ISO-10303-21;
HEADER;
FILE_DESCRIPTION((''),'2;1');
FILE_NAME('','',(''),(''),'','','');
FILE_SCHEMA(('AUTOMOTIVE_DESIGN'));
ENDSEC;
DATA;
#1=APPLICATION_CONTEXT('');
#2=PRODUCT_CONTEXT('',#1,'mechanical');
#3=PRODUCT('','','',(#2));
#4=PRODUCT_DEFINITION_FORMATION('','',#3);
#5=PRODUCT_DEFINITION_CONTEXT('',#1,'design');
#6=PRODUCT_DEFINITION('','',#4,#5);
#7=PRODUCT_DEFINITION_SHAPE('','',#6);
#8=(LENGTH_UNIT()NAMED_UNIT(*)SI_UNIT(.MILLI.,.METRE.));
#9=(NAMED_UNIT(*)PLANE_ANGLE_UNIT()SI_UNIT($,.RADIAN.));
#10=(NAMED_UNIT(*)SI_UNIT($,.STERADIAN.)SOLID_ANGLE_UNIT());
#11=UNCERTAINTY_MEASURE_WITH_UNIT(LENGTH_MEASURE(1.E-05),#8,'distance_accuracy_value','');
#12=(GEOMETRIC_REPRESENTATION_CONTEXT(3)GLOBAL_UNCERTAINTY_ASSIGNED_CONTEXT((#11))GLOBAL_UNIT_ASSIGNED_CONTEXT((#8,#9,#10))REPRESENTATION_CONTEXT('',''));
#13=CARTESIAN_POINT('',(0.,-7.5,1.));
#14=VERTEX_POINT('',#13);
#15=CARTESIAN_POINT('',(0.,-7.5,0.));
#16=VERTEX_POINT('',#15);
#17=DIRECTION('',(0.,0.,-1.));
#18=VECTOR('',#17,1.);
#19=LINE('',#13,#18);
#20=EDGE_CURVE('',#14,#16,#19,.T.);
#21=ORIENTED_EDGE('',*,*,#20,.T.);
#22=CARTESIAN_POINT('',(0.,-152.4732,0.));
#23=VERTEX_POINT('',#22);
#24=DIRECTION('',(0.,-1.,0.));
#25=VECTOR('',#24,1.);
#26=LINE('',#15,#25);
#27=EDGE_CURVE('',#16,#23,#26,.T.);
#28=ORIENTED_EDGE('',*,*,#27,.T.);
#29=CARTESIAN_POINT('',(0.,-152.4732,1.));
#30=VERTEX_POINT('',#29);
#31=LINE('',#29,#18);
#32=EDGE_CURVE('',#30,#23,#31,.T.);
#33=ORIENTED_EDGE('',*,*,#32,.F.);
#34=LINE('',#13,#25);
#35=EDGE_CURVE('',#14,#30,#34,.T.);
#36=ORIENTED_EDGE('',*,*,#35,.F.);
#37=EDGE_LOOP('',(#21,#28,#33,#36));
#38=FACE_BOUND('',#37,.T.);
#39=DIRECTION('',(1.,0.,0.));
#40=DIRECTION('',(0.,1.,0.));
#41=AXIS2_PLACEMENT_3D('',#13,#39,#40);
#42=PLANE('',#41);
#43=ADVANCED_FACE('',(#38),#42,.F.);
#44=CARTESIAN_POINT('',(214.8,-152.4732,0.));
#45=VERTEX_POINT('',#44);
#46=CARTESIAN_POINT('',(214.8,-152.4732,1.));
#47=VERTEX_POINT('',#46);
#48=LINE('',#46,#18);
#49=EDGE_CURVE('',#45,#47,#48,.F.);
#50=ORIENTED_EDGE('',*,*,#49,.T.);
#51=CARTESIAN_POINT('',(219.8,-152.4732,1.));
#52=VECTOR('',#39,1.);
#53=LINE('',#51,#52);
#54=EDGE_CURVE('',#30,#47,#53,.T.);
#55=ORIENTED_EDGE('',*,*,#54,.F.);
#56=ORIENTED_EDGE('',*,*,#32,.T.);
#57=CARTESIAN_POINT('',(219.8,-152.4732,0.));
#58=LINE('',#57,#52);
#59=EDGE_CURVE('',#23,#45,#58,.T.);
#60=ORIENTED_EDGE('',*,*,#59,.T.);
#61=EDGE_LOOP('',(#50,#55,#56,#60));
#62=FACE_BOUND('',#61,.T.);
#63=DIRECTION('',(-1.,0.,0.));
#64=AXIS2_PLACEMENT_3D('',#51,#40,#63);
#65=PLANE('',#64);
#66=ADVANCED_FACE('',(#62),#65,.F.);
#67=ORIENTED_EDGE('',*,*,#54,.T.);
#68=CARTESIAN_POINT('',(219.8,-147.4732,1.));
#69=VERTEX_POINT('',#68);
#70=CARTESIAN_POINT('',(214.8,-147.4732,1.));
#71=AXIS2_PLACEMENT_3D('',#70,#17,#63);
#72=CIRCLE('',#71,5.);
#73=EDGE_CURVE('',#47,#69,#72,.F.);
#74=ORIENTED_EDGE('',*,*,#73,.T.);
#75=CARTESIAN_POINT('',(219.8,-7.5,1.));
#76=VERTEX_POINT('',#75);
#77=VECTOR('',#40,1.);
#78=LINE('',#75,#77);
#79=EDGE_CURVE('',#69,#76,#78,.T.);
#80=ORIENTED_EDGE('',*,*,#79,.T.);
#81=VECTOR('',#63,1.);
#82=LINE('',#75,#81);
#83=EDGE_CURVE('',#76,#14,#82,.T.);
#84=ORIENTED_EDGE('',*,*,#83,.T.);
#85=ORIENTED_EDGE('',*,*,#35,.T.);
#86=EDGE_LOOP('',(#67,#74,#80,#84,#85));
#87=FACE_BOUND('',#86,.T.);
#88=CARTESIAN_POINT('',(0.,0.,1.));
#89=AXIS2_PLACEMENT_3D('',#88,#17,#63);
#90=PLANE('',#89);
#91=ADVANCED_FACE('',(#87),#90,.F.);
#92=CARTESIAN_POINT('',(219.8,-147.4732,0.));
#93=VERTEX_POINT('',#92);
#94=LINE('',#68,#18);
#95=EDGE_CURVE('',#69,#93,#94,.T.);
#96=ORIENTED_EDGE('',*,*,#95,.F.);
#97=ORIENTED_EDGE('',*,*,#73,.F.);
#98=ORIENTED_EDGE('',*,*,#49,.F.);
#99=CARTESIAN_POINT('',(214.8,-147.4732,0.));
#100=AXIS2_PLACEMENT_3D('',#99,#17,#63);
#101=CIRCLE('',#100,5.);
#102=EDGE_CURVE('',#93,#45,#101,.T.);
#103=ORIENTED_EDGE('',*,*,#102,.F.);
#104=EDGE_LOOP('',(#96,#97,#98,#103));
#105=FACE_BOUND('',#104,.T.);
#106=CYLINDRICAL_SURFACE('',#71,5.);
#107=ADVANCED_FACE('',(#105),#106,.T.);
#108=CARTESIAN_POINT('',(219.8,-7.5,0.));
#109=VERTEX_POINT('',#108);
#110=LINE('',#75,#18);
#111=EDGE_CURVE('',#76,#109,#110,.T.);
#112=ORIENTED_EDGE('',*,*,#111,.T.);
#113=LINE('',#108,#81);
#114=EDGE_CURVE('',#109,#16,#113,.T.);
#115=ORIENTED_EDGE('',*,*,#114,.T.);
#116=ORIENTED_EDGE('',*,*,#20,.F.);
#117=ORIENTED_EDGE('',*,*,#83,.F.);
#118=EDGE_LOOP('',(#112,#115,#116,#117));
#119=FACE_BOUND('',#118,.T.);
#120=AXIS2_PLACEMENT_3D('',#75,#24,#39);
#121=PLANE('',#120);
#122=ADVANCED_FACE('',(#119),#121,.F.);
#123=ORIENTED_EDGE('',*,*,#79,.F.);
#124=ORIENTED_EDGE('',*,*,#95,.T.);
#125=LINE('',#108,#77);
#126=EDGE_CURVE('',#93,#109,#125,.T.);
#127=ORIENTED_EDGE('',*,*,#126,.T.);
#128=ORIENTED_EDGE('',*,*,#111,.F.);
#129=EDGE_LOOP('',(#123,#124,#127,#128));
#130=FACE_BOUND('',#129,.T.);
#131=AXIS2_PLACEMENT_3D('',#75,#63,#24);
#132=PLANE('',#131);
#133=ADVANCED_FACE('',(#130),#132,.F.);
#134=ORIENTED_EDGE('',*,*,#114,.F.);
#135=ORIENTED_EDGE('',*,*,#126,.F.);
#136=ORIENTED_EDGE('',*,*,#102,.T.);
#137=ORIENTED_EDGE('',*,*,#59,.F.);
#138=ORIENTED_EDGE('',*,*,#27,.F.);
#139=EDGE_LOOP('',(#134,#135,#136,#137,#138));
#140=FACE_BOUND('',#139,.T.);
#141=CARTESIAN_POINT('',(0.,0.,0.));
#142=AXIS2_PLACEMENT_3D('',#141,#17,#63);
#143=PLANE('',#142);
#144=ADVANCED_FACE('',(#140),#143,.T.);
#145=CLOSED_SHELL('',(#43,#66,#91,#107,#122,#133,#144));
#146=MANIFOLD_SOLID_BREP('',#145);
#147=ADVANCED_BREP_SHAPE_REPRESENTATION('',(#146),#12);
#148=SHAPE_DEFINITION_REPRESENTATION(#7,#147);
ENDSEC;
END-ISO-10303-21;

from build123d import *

# Parameters (mm, degrees)
SKETCH1_W           = 219.8
SKETCH1_H           = 144.9732
BASE_FLANGE1_DEPTH  = 1
BREAK_CORNER1_DEPTH = 1


# Read off the part's stored shape, not the designer's step: Break-Corner1
# Sheet-metal steps are written as plain solids
with BuildPart() as part:
    # Sketch1 → Base-Flange1 (new body)
    with BuildSketch(Plane.XY):
        with Locations((109.9, -79.9866)):
            Rectangle(SKETCH1_W, SKETCH1_H)
    extrude(amount=BASE_FLANGE1_DEPTH)

    # Break-Corner1 outline → Break-Corner1 (cut)
    with BuildSketch(Plane.XY):
        with BuildLine():
            Line((219.8, -152.4732), (219.8, -147.4732))
            ThreePointArc((219.8, -147.4732), (218.335533906, -151.008733906), (214.8, -152.4732))
            Line((214.8, -152.4732), (219.8, -152.4732))
        make_face()
    extrude(amount=BREAK_CORNER1_DEPTH, mode=Mode.SUBTRACT)


solid = part.part
